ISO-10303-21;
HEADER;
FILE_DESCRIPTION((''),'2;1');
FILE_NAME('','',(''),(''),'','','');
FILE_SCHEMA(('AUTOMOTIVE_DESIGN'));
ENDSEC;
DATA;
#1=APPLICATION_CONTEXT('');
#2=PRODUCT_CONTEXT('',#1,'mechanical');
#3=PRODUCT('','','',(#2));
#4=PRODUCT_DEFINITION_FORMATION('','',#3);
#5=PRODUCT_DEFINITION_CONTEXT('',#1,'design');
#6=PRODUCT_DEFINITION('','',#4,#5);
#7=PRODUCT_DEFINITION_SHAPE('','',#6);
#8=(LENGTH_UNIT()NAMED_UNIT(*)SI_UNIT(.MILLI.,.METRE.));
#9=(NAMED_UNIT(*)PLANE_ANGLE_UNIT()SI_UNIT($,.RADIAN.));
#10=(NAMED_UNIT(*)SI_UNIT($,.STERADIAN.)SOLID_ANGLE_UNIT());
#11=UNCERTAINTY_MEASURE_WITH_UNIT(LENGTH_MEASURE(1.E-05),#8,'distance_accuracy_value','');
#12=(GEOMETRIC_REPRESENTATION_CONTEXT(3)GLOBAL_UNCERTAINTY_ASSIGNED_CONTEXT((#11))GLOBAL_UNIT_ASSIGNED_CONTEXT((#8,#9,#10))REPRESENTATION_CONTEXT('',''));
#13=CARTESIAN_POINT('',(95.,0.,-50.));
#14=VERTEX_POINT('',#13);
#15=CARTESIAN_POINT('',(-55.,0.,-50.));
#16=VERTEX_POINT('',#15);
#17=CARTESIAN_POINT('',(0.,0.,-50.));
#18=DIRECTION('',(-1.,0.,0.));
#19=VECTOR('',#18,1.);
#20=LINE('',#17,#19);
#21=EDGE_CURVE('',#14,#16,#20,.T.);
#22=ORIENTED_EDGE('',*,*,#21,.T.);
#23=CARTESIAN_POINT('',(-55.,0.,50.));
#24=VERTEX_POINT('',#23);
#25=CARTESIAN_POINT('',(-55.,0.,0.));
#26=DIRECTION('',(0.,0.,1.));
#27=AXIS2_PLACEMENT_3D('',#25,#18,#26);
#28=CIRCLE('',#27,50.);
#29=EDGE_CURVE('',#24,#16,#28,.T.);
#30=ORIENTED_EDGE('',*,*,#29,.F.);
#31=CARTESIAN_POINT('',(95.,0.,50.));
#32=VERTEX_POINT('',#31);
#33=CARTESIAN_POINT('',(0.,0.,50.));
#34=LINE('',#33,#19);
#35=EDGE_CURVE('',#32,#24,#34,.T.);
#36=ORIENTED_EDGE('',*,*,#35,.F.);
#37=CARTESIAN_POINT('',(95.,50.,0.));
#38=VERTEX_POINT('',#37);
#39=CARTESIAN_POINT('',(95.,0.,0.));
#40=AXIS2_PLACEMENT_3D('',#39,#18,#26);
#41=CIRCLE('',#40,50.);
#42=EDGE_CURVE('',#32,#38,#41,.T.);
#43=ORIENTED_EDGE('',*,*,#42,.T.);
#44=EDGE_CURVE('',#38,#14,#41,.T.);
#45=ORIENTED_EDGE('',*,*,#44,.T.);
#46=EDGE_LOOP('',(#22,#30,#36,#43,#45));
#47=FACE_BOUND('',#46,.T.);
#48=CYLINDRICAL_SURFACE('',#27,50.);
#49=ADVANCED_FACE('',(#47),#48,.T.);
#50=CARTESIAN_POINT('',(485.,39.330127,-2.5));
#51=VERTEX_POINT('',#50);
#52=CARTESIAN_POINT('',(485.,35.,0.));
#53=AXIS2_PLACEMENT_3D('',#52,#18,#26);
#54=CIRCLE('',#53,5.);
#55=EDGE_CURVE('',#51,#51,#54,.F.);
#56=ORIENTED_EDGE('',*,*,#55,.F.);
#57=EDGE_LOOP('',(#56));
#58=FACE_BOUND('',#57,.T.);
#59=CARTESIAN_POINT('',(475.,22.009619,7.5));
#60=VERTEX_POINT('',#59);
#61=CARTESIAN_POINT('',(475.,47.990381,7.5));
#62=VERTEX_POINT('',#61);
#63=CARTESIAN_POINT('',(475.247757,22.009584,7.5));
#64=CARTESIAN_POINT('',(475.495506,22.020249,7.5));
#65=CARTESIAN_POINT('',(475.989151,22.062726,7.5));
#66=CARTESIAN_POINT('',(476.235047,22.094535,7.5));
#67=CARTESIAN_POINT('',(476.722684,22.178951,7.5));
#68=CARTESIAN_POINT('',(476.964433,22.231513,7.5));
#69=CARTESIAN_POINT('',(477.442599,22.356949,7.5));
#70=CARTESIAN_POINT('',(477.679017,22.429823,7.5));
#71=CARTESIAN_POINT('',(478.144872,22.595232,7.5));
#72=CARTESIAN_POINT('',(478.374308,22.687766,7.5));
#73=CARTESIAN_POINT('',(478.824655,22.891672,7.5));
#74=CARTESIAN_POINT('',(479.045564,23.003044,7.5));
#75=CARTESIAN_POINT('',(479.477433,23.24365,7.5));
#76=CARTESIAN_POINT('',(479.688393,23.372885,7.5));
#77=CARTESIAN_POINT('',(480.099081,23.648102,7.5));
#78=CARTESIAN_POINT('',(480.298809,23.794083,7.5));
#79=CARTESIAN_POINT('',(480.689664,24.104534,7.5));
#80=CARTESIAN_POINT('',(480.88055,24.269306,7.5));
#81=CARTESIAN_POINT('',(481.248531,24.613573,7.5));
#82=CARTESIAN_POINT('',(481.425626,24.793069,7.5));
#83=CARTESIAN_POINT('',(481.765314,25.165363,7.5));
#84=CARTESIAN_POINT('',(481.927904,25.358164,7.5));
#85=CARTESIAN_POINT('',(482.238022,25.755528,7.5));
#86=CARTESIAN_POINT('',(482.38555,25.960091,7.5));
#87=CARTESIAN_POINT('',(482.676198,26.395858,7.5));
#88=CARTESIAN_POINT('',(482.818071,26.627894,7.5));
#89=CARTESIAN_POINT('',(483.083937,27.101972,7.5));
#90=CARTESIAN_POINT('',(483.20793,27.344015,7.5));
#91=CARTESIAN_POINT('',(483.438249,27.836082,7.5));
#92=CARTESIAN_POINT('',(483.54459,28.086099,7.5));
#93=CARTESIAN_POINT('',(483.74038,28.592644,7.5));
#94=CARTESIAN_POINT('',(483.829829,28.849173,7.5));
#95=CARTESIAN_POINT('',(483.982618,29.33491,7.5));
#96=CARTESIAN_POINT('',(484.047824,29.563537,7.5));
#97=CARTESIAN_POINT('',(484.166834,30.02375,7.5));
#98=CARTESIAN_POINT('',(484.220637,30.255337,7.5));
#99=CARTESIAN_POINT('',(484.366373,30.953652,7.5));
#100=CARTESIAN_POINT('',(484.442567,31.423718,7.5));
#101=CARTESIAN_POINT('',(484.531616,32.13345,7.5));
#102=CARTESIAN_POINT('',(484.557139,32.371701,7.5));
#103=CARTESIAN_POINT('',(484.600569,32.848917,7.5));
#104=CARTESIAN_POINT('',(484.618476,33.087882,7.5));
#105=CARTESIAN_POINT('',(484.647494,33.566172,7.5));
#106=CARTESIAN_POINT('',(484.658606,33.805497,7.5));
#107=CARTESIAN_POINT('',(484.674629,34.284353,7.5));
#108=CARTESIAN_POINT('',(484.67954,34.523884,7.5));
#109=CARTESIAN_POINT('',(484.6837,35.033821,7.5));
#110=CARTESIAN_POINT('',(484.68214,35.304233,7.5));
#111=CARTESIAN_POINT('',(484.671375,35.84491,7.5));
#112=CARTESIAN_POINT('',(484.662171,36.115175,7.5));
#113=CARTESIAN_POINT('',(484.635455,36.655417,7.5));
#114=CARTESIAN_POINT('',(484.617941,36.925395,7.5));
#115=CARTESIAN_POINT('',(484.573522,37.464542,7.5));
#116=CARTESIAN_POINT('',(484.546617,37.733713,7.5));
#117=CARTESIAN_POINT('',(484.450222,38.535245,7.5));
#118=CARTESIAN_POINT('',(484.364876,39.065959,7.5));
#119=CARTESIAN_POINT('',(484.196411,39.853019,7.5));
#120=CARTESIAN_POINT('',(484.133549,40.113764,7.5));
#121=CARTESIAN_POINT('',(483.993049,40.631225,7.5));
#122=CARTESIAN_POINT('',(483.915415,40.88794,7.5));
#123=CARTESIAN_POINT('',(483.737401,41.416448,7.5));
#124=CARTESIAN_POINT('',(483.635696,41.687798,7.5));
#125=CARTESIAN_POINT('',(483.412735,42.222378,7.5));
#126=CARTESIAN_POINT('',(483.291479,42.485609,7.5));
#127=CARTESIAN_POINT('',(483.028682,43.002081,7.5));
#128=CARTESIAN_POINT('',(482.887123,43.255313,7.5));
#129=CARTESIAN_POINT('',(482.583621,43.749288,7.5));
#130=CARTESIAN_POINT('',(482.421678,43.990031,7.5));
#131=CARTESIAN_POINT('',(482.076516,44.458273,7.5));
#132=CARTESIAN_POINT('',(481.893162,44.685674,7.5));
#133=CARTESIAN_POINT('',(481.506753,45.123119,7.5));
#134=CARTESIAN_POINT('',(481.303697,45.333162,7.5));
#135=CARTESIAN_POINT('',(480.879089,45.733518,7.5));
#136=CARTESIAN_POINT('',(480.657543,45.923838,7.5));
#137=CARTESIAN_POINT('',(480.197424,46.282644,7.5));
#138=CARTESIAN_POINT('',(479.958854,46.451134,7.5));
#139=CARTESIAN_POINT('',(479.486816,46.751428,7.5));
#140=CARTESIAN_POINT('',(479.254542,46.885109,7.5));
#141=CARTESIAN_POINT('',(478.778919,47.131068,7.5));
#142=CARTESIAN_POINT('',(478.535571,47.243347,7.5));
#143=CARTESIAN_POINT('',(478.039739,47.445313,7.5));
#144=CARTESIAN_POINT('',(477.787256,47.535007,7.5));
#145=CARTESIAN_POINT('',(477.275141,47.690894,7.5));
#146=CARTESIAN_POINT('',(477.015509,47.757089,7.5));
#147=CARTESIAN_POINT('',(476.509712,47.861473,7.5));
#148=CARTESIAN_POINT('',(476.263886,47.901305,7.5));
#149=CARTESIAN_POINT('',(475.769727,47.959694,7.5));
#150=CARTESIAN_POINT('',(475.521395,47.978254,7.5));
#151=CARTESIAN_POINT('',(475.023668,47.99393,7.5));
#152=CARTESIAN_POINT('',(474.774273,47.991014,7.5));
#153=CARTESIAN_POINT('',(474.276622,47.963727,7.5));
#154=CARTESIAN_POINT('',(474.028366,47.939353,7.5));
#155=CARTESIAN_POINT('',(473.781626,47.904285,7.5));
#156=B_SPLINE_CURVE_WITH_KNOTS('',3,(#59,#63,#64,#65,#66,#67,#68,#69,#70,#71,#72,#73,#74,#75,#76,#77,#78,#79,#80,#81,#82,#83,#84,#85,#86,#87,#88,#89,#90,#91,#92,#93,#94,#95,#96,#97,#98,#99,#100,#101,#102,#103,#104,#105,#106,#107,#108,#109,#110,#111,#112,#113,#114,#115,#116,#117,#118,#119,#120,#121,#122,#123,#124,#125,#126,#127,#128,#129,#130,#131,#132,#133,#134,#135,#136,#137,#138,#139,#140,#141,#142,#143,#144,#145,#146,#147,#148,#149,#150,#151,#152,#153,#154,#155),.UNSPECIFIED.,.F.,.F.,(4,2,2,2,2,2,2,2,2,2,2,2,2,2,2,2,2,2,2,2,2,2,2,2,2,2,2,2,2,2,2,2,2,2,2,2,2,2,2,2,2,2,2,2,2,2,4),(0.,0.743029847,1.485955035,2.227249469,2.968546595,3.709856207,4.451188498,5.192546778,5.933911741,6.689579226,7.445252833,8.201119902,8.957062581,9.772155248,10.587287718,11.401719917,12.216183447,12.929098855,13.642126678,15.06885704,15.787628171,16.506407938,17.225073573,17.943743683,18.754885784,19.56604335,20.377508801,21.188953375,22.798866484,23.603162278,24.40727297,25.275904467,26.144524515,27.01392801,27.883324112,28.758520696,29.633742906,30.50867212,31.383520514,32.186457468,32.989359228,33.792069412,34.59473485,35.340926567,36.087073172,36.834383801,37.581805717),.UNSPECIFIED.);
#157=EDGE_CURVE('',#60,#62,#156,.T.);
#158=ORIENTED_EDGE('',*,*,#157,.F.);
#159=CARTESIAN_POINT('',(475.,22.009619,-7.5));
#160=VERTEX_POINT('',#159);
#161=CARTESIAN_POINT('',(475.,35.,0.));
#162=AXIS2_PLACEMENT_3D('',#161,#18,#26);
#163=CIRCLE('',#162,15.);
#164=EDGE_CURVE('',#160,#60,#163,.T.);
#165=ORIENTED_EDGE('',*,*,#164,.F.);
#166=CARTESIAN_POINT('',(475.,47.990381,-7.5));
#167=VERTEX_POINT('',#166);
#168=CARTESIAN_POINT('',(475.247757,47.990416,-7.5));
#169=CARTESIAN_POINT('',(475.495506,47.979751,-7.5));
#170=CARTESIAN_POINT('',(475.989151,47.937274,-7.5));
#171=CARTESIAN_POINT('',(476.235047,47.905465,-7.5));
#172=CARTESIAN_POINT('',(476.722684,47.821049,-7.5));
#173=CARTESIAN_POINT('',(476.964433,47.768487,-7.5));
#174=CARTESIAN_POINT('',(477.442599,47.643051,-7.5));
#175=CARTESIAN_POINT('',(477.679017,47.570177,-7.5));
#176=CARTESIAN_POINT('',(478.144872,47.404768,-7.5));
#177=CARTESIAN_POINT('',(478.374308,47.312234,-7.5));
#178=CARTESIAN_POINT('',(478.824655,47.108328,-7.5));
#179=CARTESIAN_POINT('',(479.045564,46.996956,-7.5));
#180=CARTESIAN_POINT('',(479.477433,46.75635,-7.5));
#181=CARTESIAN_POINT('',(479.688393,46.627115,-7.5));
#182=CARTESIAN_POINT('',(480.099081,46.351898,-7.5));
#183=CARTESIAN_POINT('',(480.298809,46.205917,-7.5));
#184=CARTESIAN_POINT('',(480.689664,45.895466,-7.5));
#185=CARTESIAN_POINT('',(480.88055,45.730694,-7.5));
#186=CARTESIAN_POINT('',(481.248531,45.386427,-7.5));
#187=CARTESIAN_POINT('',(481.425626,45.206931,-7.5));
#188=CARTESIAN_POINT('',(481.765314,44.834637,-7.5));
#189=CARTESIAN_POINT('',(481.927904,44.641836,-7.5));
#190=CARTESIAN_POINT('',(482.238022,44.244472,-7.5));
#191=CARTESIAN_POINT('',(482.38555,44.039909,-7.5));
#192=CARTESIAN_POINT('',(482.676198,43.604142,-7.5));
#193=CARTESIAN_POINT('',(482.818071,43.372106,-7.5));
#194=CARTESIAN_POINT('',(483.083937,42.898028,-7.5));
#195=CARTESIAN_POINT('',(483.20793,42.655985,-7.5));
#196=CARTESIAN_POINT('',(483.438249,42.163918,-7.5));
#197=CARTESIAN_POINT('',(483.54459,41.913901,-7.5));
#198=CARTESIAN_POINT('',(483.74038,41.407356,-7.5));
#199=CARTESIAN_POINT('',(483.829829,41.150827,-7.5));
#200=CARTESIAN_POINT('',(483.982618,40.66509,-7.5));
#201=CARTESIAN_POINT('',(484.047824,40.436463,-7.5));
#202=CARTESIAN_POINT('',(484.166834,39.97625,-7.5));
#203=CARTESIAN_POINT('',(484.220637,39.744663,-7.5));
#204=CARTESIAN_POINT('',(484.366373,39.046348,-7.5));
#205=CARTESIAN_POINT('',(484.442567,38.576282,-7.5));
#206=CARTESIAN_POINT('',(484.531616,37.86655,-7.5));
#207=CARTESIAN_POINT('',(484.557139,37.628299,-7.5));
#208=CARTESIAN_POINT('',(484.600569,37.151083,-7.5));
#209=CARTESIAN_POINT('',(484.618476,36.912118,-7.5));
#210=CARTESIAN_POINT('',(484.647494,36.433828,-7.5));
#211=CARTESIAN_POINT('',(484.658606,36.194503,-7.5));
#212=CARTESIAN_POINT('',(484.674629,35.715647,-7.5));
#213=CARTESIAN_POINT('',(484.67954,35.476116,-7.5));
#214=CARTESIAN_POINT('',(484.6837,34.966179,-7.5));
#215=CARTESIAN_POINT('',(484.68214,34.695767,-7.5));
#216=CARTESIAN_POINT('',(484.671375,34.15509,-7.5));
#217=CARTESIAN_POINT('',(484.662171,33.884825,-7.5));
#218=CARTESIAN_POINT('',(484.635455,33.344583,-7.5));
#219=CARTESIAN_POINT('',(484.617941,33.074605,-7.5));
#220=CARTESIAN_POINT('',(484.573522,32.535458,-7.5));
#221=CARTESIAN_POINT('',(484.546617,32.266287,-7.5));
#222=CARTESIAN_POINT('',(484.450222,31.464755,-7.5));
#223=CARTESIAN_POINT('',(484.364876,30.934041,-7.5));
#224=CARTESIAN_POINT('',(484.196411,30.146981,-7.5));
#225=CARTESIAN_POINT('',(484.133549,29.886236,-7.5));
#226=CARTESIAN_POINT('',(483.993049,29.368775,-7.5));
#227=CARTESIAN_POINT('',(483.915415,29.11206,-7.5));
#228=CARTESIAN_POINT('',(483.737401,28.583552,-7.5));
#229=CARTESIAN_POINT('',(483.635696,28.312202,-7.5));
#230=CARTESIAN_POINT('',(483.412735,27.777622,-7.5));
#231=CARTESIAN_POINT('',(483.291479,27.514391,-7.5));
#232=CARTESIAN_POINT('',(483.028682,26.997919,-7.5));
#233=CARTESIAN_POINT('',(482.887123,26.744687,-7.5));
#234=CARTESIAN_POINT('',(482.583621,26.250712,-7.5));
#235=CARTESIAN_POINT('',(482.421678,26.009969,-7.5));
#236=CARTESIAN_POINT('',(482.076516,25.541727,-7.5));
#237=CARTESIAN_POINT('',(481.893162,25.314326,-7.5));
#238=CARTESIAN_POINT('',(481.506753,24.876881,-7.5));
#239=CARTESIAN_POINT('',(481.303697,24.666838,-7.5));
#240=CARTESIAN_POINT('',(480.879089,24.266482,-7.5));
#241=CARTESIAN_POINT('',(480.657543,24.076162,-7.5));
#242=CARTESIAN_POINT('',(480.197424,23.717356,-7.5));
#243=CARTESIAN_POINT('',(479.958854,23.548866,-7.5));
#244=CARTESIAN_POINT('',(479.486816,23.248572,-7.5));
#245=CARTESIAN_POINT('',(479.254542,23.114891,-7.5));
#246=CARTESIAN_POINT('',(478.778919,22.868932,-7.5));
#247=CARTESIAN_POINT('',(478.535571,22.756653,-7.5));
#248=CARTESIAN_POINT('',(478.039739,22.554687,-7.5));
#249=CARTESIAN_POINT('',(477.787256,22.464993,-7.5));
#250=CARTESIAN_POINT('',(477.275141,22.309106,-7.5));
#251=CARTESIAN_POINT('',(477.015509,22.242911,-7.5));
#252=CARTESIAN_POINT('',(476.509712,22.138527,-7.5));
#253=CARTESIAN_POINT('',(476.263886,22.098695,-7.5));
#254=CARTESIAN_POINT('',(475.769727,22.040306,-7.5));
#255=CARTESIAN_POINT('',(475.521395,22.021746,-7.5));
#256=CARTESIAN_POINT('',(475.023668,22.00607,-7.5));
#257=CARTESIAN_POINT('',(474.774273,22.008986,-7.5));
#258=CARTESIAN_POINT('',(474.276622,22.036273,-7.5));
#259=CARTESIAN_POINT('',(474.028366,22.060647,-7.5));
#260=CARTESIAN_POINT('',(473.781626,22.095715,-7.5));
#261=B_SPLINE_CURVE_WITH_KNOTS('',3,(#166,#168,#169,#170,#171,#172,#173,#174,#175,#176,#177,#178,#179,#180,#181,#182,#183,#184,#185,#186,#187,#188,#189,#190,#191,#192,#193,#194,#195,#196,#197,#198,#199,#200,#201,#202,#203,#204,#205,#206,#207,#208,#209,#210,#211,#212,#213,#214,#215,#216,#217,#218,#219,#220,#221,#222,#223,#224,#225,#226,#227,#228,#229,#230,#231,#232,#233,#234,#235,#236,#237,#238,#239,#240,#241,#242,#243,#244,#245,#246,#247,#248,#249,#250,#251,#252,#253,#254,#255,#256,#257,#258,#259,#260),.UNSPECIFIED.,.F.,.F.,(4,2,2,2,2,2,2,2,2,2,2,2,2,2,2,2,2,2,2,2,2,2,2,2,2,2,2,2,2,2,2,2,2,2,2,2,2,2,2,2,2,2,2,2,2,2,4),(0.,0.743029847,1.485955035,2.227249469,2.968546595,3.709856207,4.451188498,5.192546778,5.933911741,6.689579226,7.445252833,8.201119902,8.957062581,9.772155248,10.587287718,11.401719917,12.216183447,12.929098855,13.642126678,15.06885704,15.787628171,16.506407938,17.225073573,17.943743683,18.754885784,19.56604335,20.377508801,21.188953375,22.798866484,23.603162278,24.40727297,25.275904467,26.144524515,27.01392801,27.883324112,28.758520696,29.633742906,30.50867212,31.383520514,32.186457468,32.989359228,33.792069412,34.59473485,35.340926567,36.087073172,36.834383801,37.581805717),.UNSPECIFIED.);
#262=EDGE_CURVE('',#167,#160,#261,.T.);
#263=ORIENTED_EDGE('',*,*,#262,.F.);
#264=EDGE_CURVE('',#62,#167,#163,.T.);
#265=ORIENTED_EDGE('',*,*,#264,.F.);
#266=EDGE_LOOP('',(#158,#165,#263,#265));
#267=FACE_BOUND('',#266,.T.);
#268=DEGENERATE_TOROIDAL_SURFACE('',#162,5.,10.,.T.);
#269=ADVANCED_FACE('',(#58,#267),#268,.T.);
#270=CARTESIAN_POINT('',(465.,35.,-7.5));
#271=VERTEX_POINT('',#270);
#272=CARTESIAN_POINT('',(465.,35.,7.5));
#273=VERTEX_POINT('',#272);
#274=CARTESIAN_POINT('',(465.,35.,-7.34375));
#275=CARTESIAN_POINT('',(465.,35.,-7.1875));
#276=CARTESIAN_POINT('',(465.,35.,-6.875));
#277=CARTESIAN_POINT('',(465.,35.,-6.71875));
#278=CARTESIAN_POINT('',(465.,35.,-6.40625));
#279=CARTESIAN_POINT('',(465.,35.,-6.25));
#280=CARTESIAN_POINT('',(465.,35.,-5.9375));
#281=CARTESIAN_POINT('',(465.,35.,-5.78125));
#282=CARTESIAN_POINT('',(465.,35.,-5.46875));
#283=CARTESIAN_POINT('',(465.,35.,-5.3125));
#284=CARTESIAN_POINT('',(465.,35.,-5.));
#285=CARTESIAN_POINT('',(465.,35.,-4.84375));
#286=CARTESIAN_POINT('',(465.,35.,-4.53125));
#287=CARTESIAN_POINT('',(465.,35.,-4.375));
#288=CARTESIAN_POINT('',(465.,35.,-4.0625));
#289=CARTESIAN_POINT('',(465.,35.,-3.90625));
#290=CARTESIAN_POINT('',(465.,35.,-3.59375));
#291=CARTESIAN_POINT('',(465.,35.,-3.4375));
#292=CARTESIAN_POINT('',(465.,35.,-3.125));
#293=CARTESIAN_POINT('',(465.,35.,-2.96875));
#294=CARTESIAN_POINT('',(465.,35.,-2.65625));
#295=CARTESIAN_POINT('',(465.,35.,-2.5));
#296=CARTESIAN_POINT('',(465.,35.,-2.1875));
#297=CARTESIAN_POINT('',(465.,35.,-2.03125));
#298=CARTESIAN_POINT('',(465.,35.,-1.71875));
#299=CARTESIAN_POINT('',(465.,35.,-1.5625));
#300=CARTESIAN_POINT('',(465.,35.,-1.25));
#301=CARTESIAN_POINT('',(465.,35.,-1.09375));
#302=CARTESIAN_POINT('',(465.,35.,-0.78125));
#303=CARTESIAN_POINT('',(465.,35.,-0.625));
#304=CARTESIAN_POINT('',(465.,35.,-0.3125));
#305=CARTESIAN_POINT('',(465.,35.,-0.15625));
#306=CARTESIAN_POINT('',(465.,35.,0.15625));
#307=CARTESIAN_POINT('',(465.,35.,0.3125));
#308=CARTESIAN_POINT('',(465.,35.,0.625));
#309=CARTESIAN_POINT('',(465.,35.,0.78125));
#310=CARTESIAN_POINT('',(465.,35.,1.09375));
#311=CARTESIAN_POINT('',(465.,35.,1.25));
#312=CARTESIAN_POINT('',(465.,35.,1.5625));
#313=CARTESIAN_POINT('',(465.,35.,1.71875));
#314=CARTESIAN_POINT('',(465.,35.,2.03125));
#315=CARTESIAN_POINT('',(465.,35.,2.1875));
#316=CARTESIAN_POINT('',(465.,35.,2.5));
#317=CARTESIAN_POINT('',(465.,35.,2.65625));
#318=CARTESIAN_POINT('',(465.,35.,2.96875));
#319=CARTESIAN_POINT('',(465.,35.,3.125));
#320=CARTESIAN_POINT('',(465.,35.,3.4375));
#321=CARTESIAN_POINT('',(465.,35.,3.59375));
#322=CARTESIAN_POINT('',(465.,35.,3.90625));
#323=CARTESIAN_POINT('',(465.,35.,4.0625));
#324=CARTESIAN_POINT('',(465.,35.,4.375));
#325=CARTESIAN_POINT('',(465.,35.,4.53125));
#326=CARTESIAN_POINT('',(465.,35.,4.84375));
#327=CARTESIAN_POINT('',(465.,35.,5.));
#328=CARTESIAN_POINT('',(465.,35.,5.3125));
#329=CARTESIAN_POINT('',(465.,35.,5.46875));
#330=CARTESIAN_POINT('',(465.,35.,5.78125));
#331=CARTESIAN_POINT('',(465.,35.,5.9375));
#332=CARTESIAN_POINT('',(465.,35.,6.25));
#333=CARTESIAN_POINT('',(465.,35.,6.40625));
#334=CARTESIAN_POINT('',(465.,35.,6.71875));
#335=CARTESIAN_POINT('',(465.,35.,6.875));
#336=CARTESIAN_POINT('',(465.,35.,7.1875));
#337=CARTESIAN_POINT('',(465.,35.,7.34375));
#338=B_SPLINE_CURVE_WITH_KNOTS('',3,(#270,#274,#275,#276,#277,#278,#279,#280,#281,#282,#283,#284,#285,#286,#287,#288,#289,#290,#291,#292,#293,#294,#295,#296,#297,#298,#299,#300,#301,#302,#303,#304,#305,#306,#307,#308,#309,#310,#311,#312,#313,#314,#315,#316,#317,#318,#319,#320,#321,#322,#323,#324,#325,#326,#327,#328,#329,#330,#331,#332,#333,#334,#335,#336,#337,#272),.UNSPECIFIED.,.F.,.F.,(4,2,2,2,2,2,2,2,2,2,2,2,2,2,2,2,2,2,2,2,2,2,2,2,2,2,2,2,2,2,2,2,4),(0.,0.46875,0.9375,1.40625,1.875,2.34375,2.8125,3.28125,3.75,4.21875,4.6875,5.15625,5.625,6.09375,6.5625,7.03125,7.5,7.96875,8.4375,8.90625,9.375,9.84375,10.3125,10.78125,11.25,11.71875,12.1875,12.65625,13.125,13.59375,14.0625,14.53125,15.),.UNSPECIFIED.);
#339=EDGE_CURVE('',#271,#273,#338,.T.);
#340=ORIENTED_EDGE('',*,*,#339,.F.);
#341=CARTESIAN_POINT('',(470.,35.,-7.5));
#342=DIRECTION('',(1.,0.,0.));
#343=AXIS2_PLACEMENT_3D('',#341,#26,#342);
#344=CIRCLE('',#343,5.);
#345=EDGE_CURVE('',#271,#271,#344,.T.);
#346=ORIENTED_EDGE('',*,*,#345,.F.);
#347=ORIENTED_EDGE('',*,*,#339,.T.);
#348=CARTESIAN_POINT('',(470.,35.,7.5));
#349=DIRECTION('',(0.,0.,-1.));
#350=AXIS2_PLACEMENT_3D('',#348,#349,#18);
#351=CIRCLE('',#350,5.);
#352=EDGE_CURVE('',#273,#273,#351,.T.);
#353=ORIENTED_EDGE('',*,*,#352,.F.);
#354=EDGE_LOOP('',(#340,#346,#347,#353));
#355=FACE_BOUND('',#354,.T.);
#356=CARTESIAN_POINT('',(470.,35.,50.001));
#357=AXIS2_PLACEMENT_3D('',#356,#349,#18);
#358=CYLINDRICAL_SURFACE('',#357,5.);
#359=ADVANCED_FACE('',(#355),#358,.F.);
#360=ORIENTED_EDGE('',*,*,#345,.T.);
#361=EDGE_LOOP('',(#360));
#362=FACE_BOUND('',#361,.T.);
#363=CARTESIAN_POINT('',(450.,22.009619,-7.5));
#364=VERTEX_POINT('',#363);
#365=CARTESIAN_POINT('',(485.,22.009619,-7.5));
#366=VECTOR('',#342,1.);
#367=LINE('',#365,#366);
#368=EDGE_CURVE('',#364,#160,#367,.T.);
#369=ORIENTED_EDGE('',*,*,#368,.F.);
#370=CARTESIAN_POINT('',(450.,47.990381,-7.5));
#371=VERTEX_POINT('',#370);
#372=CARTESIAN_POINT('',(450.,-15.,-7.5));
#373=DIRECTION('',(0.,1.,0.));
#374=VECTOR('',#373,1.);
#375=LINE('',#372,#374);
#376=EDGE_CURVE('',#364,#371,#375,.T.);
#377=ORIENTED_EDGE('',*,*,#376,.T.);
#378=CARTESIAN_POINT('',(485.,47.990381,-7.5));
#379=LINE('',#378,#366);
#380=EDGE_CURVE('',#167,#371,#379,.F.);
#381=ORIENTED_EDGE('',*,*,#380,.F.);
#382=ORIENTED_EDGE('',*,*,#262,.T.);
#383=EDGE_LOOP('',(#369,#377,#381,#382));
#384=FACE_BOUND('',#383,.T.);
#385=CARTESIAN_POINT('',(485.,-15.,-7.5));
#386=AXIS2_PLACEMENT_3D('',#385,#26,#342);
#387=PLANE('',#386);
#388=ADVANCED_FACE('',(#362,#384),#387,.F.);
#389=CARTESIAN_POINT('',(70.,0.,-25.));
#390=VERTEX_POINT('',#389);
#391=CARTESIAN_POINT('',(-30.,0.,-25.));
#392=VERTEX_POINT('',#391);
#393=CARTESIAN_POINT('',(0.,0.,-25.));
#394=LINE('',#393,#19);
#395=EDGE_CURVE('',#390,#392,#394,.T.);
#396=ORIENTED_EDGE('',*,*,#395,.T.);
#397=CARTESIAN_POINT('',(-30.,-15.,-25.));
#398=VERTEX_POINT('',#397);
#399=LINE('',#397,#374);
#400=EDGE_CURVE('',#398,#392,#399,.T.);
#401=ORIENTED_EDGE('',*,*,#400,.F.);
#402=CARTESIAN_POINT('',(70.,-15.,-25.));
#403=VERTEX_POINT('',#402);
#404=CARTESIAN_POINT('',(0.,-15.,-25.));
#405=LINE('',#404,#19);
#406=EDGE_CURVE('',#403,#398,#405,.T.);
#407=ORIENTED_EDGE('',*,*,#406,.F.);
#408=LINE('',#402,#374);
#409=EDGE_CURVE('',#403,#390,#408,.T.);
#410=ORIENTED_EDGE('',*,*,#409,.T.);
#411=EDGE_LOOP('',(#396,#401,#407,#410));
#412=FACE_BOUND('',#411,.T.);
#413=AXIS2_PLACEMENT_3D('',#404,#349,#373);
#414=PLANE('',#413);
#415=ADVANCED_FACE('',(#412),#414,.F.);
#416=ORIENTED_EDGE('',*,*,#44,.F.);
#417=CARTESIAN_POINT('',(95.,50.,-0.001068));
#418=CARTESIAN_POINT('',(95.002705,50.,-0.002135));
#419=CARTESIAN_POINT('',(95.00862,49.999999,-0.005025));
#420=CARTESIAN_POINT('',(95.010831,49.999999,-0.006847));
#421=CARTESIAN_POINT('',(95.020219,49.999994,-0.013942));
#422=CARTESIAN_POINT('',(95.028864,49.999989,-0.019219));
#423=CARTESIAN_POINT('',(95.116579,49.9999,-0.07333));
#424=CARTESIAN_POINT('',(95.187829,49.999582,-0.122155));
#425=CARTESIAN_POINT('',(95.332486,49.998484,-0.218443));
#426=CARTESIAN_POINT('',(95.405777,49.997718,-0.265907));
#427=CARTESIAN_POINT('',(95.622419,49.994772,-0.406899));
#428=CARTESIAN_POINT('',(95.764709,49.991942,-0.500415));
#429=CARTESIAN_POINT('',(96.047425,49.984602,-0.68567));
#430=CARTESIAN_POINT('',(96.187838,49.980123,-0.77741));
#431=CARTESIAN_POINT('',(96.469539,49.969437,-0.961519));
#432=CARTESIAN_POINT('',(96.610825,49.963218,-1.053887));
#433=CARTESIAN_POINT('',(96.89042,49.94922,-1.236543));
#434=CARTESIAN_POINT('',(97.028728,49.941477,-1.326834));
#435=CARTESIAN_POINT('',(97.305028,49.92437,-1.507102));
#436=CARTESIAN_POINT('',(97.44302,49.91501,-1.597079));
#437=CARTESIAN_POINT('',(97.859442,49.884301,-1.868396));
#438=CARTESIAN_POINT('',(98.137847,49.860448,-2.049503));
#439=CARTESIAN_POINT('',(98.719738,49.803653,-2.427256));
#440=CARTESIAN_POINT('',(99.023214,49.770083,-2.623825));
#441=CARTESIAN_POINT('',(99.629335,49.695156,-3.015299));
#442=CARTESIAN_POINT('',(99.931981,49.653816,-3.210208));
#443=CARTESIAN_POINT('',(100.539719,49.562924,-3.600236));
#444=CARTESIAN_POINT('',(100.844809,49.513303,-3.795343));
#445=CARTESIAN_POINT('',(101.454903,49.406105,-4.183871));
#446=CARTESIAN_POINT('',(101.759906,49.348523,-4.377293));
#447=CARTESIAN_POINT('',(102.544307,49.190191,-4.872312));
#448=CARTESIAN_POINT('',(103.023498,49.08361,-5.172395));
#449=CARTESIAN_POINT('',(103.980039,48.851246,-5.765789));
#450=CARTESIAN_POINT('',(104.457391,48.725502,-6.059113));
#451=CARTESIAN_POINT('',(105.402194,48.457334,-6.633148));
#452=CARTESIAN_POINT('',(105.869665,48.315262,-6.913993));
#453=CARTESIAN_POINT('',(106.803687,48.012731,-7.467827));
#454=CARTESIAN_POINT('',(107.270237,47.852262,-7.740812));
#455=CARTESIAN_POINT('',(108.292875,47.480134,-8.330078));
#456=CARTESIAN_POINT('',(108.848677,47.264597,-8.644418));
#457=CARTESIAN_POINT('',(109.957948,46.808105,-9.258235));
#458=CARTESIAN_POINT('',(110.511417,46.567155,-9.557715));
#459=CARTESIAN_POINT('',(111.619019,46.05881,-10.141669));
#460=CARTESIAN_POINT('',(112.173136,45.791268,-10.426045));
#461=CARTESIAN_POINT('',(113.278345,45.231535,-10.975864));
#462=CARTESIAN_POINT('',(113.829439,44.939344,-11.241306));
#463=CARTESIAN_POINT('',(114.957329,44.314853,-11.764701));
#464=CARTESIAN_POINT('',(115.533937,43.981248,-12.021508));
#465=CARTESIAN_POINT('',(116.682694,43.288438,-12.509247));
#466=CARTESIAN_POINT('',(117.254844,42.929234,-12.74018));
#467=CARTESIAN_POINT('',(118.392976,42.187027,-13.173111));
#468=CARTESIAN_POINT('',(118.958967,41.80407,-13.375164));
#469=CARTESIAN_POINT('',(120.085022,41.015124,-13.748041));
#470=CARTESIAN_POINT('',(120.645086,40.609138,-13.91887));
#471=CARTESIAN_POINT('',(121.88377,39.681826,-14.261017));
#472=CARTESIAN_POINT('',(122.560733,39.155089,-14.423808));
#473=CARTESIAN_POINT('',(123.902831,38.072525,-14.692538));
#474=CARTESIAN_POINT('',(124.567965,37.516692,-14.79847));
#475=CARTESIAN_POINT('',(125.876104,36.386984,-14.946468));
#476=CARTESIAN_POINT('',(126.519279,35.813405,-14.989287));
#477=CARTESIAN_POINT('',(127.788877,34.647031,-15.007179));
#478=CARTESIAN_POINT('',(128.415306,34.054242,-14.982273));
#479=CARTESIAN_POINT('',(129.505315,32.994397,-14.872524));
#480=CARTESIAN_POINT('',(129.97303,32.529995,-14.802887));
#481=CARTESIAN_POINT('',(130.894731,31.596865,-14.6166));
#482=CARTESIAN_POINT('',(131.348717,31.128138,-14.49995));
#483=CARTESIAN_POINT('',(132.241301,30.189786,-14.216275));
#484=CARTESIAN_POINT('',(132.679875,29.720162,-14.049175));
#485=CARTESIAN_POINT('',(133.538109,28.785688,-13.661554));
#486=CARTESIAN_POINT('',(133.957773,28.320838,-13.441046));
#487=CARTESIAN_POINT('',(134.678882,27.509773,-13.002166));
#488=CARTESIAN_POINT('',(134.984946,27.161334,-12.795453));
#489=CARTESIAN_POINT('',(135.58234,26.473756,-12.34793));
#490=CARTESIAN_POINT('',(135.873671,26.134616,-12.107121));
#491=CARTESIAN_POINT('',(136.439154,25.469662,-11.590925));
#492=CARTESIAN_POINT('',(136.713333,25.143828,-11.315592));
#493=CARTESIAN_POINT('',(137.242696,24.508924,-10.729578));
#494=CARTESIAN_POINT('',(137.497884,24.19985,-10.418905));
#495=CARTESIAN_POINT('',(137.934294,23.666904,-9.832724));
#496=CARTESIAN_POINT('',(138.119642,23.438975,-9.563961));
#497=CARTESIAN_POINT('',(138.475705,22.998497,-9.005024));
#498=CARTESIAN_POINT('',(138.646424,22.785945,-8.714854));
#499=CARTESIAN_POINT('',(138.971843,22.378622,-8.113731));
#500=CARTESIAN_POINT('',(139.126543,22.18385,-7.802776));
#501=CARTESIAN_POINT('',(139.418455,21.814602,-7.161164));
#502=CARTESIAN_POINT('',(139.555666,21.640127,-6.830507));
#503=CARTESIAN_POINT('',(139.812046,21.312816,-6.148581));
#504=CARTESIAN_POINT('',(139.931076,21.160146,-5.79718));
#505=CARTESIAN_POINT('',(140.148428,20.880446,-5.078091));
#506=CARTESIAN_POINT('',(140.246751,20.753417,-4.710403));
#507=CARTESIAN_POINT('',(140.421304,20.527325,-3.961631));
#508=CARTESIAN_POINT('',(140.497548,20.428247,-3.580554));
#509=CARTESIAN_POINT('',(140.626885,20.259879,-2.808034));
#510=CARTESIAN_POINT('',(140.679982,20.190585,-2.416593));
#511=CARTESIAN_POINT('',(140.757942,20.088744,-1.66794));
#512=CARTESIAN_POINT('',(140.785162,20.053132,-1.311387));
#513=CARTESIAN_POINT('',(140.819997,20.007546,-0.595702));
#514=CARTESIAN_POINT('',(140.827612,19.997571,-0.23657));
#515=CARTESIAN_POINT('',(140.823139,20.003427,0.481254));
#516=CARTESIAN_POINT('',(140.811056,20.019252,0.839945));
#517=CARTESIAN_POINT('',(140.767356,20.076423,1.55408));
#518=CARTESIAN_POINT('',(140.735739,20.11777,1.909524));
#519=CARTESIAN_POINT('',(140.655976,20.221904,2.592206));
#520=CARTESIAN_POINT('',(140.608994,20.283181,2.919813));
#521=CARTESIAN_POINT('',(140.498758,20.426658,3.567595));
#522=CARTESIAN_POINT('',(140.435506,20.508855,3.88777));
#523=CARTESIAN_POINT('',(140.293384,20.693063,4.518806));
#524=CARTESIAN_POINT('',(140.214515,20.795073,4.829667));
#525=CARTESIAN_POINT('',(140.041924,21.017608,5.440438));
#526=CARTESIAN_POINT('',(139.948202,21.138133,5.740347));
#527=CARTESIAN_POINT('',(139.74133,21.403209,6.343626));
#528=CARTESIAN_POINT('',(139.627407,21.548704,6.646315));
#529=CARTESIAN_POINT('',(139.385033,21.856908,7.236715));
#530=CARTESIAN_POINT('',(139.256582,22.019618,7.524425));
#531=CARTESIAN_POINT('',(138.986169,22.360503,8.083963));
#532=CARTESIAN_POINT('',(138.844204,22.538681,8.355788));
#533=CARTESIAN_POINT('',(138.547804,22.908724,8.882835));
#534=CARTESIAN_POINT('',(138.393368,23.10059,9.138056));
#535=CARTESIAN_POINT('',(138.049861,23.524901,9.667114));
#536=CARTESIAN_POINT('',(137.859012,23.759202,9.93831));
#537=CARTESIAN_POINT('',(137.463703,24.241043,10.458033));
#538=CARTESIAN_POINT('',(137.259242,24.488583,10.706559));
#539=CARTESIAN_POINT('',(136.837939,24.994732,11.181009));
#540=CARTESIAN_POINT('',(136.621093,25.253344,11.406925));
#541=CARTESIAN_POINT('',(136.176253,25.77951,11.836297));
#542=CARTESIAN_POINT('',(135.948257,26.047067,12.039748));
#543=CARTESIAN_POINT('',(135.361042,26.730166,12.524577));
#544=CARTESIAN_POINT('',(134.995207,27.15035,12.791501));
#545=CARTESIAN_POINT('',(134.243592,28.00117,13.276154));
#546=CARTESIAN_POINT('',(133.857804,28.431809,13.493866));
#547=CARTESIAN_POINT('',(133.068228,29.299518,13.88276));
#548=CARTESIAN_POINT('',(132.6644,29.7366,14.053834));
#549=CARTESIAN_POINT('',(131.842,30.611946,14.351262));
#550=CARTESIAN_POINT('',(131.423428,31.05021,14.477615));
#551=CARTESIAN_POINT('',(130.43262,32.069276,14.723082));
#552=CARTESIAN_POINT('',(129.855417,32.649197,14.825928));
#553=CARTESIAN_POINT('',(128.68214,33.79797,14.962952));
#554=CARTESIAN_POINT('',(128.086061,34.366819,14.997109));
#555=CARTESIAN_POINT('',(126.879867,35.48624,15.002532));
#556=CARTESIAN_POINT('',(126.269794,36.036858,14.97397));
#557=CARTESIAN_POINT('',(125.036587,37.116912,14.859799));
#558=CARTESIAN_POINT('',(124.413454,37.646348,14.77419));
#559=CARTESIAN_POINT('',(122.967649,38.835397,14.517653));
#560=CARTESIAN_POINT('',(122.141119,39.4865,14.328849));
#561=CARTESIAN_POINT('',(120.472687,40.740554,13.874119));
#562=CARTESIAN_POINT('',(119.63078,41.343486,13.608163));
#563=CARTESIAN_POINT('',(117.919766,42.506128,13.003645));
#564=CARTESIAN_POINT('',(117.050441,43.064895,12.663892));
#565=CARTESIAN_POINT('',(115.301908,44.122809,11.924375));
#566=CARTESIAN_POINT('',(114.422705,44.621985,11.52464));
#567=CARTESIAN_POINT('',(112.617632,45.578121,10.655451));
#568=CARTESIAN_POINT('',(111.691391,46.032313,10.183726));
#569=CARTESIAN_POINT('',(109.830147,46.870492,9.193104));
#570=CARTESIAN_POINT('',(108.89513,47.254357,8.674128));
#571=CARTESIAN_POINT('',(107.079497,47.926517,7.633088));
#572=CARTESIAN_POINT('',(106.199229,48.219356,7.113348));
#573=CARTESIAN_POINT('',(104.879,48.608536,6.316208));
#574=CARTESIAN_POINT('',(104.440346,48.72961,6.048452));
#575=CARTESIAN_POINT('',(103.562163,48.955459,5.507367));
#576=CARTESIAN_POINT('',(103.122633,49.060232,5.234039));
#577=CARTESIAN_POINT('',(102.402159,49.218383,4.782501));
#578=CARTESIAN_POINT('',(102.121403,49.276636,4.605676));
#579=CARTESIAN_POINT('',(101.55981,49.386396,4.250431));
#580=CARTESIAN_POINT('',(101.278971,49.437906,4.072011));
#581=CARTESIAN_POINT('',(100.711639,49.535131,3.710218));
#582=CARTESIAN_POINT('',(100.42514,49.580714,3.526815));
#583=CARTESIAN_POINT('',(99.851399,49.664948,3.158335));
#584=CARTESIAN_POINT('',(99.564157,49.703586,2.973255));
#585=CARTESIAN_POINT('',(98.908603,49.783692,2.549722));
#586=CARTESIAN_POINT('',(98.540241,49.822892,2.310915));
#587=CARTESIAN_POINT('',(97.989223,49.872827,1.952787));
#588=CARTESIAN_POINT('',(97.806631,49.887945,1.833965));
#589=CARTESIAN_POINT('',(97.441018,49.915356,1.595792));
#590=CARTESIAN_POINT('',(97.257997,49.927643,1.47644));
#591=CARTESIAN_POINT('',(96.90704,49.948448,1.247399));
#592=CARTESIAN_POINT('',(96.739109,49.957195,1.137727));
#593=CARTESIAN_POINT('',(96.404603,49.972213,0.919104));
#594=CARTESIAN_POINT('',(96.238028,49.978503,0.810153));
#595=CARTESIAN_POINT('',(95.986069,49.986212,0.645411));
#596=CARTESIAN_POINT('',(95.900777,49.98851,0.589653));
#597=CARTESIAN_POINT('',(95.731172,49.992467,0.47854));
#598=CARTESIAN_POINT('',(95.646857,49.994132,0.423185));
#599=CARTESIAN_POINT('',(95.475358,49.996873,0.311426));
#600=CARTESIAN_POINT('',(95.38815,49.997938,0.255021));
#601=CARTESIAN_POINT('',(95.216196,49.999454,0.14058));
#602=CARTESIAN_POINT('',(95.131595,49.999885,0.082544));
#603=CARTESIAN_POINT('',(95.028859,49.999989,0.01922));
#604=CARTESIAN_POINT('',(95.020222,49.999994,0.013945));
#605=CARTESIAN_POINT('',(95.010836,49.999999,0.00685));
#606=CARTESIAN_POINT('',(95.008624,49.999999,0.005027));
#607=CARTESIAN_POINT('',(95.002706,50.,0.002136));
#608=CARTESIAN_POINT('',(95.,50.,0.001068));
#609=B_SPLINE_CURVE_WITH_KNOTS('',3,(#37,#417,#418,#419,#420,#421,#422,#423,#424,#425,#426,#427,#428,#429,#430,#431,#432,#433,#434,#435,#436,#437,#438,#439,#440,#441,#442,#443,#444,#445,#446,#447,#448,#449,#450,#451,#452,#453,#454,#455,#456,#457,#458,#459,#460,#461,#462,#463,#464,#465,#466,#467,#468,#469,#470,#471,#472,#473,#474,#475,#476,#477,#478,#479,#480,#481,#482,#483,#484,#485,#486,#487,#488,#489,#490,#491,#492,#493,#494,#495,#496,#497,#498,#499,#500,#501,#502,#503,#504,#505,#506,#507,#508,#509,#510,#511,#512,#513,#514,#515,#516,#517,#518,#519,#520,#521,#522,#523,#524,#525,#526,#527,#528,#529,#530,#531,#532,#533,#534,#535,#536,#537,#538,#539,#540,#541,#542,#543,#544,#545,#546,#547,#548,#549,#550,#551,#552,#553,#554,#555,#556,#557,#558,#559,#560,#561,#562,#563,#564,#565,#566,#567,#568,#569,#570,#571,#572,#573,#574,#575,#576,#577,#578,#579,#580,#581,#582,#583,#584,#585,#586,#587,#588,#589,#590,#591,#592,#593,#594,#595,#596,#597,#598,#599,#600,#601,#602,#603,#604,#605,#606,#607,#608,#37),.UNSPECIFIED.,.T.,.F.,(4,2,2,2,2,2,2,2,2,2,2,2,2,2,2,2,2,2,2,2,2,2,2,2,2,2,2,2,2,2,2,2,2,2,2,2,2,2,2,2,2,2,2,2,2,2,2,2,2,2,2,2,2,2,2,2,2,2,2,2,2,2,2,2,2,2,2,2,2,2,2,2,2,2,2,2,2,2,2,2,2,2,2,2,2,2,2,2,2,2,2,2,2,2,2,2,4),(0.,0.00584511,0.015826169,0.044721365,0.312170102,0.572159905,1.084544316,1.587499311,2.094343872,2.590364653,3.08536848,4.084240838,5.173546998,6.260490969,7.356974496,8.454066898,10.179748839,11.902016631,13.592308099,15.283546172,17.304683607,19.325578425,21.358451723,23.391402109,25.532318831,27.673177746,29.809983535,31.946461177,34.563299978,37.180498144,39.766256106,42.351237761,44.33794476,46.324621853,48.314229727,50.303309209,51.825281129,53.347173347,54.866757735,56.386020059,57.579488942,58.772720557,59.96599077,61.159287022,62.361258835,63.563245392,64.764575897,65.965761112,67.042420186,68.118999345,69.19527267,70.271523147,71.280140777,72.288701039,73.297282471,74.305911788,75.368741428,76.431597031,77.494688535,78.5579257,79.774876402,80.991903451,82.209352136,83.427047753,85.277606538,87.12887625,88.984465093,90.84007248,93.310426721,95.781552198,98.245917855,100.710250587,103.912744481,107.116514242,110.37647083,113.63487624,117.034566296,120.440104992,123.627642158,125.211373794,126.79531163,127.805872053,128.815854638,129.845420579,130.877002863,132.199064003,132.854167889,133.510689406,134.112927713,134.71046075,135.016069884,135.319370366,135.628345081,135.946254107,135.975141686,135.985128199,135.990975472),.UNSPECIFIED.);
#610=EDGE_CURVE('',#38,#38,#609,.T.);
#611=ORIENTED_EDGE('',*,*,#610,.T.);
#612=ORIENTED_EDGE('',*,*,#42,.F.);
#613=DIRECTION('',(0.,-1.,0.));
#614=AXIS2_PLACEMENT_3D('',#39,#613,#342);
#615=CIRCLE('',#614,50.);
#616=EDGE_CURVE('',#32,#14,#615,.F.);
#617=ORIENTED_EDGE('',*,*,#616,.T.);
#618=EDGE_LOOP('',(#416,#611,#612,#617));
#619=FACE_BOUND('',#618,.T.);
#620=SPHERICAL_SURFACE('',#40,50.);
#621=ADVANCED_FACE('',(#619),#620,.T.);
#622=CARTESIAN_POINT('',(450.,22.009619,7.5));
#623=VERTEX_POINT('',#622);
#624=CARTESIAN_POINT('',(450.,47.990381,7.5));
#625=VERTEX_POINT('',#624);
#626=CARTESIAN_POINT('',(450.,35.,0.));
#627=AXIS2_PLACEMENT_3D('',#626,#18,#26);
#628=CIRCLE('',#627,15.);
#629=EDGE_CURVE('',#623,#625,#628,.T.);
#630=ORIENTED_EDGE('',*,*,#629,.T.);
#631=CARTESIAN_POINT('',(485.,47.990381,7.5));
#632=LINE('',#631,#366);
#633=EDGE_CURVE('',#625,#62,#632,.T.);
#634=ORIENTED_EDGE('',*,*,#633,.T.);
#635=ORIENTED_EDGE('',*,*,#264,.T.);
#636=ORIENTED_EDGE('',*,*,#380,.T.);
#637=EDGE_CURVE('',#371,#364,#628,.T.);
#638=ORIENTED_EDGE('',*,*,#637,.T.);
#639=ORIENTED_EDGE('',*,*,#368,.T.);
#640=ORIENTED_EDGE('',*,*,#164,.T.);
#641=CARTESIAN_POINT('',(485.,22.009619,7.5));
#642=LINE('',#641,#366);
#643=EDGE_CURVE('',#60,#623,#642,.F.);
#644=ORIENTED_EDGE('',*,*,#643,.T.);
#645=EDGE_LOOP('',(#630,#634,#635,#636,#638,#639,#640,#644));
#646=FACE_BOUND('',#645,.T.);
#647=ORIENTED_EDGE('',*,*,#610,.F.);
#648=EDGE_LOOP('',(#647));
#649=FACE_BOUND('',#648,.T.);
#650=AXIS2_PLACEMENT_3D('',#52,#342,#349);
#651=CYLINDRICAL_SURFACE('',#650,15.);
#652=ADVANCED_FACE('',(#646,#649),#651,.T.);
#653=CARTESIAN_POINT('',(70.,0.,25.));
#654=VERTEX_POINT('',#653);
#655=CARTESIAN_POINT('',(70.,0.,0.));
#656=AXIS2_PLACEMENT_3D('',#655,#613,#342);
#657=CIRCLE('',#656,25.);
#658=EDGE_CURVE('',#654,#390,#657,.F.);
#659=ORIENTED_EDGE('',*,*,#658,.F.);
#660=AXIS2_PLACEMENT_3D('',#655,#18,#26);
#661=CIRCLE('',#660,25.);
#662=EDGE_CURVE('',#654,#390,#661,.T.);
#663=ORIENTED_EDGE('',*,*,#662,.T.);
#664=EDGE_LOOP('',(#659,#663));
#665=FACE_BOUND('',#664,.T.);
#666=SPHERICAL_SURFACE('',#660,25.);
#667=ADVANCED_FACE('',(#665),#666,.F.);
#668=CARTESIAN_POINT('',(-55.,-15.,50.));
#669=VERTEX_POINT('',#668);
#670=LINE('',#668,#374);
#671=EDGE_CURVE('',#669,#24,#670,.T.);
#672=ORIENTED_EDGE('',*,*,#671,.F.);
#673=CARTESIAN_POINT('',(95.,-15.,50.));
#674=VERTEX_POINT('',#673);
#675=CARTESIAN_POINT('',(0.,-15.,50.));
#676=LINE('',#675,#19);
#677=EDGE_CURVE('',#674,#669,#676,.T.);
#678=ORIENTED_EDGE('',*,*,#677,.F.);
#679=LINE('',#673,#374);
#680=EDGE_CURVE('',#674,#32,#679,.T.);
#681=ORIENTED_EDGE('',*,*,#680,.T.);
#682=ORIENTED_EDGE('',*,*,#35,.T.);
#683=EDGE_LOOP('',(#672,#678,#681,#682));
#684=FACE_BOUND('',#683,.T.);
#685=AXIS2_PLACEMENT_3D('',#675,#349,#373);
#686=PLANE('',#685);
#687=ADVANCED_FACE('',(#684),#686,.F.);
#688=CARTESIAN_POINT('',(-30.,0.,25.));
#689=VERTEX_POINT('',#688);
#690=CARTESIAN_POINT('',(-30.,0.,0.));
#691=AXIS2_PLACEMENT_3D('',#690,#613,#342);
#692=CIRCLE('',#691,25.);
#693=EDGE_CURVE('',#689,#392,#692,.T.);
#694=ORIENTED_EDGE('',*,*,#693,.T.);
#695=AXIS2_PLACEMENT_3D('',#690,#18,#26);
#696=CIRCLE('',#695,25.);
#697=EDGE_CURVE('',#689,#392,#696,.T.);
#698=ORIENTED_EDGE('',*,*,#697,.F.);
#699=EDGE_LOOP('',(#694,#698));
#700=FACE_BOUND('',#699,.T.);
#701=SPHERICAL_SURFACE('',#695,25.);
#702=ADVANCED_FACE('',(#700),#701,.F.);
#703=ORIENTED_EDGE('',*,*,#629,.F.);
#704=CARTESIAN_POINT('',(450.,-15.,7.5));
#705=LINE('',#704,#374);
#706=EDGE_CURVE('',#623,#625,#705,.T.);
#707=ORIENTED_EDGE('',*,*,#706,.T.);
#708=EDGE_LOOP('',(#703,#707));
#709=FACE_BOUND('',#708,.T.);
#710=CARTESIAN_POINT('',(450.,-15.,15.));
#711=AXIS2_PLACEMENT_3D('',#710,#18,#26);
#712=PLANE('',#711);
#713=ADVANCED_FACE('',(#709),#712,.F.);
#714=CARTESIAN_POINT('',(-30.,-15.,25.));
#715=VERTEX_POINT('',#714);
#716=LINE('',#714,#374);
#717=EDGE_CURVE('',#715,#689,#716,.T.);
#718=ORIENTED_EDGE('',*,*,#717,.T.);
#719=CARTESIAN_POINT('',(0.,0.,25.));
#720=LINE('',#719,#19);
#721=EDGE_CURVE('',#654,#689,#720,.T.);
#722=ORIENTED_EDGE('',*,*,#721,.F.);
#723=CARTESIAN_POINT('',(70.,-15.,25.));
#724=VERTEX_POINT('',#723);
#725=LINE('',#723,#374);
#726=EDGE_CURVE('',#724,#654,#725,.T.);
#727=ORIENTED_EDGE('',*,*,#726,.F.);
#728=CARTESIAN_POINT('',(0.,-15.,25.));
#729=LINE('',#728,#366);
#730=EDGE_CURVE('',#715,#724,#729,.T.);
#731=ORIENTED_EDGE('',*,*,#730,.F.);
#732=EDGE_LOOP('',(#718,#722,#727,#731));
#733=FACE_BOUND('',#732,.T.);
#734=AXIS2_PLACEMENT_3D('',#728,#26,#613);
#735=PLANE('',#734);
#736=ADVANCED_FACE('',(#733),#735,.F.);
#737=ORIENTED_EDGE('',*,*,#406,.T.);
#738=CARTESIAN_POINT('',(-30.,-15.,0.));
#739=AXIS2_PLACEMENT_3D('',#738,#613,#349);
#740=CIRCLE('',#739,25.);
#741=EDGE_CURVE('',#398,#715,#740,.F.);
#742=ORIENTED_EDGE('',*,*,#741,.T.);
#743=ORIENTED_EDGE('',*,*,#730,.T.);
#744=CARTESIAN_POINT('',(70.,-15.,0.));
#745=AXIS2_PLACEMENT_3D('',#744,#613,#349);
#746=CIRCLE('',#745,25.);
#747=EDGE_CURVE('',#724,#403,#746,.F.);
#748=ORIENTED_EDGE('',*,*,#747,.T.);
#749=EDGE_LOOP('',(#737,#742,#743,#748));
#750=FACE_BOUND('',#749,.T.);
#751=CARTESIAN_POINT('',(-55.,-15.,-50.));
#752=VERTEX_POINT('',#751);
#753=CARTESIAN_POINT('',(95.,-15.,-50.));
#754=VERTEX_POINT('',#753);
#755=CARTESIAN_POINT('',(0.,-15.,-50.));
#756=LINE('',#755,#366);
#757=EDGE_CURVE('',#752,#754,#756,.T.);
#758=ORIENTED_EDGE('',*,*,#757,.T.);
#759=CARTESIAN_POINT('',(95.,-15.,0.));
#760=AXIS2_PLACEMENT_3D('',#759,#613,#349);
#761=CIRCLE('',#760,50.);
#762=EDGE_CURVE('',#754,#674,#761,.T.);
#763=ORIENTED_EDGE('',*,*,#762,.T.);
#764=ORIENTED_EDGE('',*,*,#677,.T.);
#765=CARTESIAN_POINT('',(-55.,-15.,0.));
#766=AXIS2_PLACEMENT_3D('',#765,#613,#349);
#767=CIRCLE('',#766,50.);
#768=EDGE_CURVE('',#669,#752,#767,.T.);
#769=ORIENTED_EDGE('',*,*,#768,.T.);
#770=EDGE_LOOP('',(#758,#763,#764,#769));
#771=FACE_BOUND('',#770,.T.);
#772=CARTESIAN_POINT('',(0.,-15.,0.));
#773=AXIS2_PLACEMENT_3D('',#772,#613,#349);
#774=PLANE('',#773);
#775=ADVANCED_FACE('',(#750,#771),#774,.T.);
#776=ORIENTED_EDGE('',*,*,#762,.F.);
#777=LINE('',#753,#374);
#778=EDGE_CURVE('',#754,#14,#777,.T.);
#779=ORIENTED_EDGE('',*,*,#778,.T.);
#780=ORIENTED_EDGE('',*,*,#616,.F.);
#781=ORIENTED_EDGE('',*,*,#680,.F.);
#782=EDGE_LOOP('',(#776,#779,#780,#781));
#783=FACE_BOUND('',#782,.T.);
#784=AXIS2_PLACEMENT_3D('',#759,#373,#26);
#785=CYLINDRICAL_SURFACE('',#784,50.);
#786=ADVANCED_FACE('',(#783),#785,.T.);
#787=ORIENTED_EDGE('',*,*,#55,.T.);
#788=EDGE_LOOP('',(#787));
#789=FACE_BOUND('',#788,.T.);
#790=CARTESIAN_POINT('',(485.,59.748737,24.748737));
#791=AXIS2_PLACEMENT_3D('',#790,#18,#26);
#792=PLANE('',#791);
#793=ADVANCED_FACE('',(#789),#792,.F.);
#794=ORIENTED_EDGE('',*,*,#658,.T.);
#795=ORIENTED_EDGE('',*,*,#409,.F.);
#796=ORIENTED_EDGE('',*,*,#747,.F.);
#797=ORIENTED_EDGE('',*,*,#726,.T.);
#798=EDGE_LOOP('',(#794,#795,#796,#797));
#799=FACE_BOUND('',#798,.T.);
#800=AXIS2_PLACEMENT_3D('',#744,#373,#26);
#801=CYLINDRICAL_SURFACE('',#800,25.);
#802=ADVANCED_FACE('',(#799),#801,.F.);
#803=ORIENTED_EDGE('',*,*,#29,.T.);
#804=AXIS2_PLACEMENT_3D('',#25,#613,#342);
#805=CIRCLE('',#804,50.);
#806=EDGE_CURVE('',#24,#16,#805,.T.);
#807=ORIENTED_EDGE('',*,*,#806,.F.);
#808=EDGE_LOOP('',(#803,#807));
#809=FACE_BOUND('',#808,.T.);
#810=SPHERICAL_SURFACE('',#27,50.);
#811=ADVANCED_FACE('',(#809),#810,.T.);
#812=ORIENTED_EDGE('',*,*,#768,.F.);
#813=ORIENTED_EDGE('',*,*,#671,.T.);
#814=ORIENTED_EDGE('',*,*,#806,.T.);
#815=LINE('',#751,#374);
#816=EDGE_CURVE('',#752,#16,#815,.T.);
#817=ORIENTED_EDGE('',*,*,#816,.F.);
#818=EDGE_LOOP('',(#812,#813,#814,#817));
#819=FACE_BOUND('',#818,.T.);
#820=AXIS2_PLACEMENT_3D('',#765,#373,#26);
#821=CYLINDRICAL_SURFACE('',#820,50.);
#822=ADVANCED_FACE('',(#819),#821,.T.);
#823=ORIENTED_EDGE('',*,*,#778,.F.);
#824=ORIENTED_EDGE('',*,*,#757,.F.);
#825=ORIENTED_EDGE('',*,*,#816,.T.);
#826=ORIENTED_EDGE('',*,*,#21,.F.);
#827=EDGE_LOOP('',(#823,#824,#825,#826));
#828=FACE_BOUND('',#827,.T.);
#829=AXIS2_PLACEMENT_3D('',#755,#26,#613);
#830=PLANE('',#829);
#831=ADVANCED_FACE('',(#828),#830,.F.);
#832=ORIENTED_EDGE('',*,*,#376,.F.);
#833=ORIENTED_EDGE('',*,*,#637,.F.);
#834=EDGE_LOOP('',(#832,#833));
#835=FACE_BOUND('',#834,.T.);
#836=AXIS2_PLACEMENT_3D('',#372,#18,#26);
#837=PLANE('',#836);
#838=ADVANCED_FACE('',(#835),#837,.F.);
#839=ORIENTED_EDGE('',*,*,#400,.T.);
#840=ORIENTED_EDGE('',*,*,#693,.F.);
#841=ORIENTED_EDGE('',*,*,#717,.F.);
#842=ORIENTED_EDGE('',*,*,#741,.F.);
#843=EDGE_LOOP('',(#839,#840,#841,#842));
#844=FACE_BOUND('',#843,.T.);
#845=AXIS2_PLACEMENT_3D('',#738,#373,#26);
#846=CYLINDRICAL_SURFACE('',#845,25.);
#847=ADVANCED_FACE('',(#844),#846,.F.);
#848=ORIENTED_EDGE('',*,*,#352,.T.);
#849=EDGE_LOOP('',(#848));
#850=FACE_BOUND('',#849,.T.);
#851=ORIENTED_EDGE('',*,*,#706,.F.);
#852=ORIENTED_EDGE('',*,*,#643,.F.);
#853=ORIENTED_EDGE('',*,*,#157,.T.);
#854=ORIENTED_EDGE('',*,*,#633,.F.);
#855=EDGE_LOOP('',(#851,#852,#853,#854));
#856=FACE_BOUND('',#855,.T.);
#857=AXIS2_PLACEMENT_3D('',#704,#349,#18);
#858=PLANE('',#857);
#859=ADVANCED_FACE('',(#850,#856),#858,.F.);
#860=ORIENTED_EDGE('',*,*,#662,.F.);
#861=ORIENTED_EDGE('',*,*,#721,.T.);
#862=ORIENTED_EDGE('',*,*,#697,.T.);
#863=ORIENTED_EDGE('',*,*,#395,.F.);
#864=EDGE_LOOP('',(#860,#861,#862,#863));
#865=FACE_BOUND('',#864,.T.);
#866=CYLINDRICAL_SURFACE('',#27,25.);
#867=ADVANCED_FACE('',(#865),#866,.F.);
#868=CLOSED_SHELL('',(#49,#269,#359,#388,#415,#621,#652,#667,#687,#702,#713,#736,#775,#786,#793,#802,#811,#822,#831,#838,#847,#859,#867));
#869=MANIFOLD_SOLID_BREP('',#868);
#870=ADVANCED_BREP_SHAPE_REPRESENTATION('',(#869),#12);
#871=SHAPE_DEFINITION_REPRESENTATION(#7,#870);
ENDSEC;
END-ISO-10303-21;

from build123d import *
from build123d.topology import SkipClean

# Parameters (mm, degrees)
REVOLVE2_ANGLE                      = 180
SKETCH1_3_W                         = 354.292858
SKETCH1_3_H                         = 15
REVOLVE3_ANGLE                      = 270
SKETCH1_19_W                        = 354.292858
SKETCH1_19_H                        = 15
BOSS_EXTRUDE1_DEPTH                 = 15
CUT_EXTRUDE1_REACH                  = 492.128
CUT_EXTRUDE1_END_RADIUS             = 15
SKETCH5_R                           = 5
CUT_EXTRUDE1_DIRECTION_2_REACH      = 492.128
CUT_EXTRUDE1_DIRECTION_2_END_RADIUS = 15
CUT_EXTRUDE6_DEPTH                  = 491.127535
CUT_EXTRUDE6_DEPTH_BACK             = 491.127535
SKETCH6_W                           = 35
SKETCH6_H                           = 7.5
FILLET1_R                           = 10


with BuildPart() as part:
    # Sketch1 → Revolve2 (revolve, symmetric)
    with SkipClean():  # the faces are left unmerged after this step: merging them gives an invalid solid
        with BuildSketch(Plane.XY) as revolve2_sk:
            with BuildLine():
                ThreePointArc((145, 0), (141.289076, 18.902948), (130.707142, 35))
                ThreePointArc((130.707142, 35), (114.364917, 46.097722), (95, 50))
                Line((95, 50), (-55, 50))
                ThreePointArc((-55, 50), (-90.355339, 35.355339), (-105, 0))
                Line((-105, 0), (-55, 0))
                ThreePointArc((-55, 0), (-47.67767, 17.67767), (-30, 25))
                Line((-30, 25), (70, 25))
                ThreePointArc((70, 25), (87.67767, 17.67767), (95, 0))
                Line((95, 0), (145, 0))
            make_face()
        revolve(axis=Axis((-55, 0, 0), (1, 0, 0)), revolution_arc=REVOLVE2_ANGLE / 2)
        revolve(revolve2_sk.sketch, axis=Axis((-55, 0, 0), (-1, 0, 0)), revolution_arc=REVOLVE2_ANGLE / 2)

    # Sketch1<3> → Revolve3 (revolve, symmetric)
    with SkipClean():  # the faces are left unmerged after this step: merging them gives an invalid solid
        with BuildSketch(Plane.XY) as revolve3_sk:
            with Locations((307.853571, 42.5)):
                Rectangle(SKETCH1_3_W, SKETCH1_3_H)
            with BuildLine():
                Line((130.707142, 35), (130.707142, 50))
                Line((130.707142, 50), (95, 50))
                ThreePointArc((95, 50), (114.364917, 46.097722), (130.707142, 35))
            make_face()
        revolve(axis=Axis((485, 35, 0), (-1, 0, 0)), revolution_arc=REVOLVE3_ANGLE / 2)
        revolve(revolve3_sk.sketch, axis=Axis((485, 35, 0), (1, 0, 0)), revolution_arc=REVOLVE3_ANGLE / 2)

    # Sketch1<19> → Revolve4 (revolve)
    with SkipClean():  # the faces are left unmerged after this step: merging them gives an invalid solid
        with BuildSketch(Plane.XY, mode=Mode.PRIVATE) as revolve4_sk:
            with Locations((307.853571, 42.5)):
                Rectangle(SKETCH1_19_W, SKETCH1_19_H)
        revolve(revolve4_sk.sketch.rotate(Axis((485, 35, 0), (-1, 0, 0)), 90), axis=Axis((485, 35, 0), (-1, 0, 0)))

    # Sketch2 → Boss-Extrude1 (add)
    with SkipClean():  # the faces are left unmerged after this step: merging them gives an invalid solid
        with BuildSketch(Plane.XZ):
            with BuildLine():
                Line((-55, -50), (95, -50))
                ThreePointArc((95, -50), (145, 0), (95, 50))
                Line((95, 50), (-55, 50))
                ThreePointArc((-55, 50), (-105, 0), (-55, -50))
            make_face()
            with BuildLine():
                ThreePointArc((-30, -25), (-55, 0), (-30, 25))
                Line((-30, 25), (70, 25))
                ThreePointArc((70, 25), (95, 0), (70, -25))
                Line((70, -25), (-30, -25))
            make_face(mode=Mode.SUBTRACT)
        extrude(amount=BOSS_EXTRUDE1_DEPTH)

    # Cut-Extrude1: up to this cylinder (the profile starts inside it)
    with SkipClean():  # the faces are left unmerged after this step: merging them gives an invalid solid
        cut_extrude1_end = Plane(origin=(470, 35, 0), z_dir=(1, 0, 0)) * Cylinder(CUT_EXTRUDE1_END_RADIUS, 1015.256, mode=Mode.PRIVATE)
        # Sketch5 → Cut-Extrude1 (cut, up to the surface)
        with BuildSketch(Plane.XY, mode=Mode.PRIVATE) as cut_extrude1_sk1:
            with Locations(Location((470, 35, 0), (0, 0, 180))):
                Circle(SKETCH5_R)
        cut_extrude1_tool1 = extrude(cut_extrude1_sk1.sketch, amount=-CUT_EXTRUDE1_REACH, mode=Mode.PRIVATE) & cut_extrude1_end
        add(cut_extrude1_tool1.solids().sort_by_distance((470, 35, 0))[0], mode=Mode.SUBTRACT)

    # Cut-Extrude1 direction 2: up to this cylinder (the profile starts inside it)
    with SkipClean():  # the faces are left unmerged after this step: merging them gives an invalid solid
        cut_extrude1_direction_2_end = Plane(origin=(470, 35, 0), z_dir=(1, 0, 0)) * Cylinder(CUT_EXTRUDE1_DIRECTION_2_END_RADIUS, 1015.256, mode=Mode.PRIVATE)
        # Sketch5 → Cut-Extrude1 direction 2 (cut, up to the surface)
        with BuildSketch(Plane.XY, mode=Mode.PRIVATE) as cut_extrude1_direction_2_sk1:
            with Locations(Location((470, 35, 0), (0, 0, 180))):
                Circle(SKETCH5_R)
        cut_extrude1_direction_2_tool1 = extrude(cut_extrude1_direction_2_sk1.sketch, amount=CUT_EXTRUDE1_DIRECTION_2_REACH, mode=Mode.PRIVATE) & cut_extrude1_direction_2_end
        add(cut_extrude1_direction_2_tool1.solids().sort_by_distance((470, 35, 0))[0], mode=Mode.SUBTRACT)

    # Sketch6 → Cut-Extrude6 (cut, two sides: drawn at the far end of the back side and taken through both)
    with SkipClean():  # the faces are left unmerged after this step: merging them gives an invalid solid
        with BuildSketch(Plane(origin=(0, 0, 0), x_dir=(1, 0, 0), z_dir=(0, 1, 0)).offset(-CUT_EXTRUDE6_DEPTH_BACK)):
            with Locations((467.5, 11.25)):
                Rectangle(SKETCH6_W, SKETCH6_H)
            with Locations((467.5, -11.25)):
                Rectangle(SKETCH6_W, SKETCH6_H)
        extrude(amount=CUT_EXTRUDE6_DEPTH + CUT_EXTRUDE6_DEPTH_BACK, mode=Mode.SUBTRACT)

    # Fillet1
    # the kernel refuses this fillet: 10 mm, written as the material it takes off along each edge
    with BuildSketch(Plane(origin=(485, 35, 0), x_dir=(0, 0.5808452103821433, -0.8140140303312491), z_dir=(0, 0.8140140303312491, 0.5808452103821433))) as fillet1_piece_1:
        with BuildLine():
            CenterArc((15 - FILLET1_R, FILLET1_R), FILLET1_R, 270, 90)
            Line((15 - FILLET1_R, 0), (15, 0))
            Line((15, 0), (15, FILLET1_R))
        make_face()
    revolve(axis=Axis((485, 35, 0), (-1, 0, 0)), revolution_arc=251.020024, mode=Mode.SUBTRACT)
    with BuildSketch(Plane(origin=(485, 35, 0), x_dir=(0, -0.5808452103821072, -0.8140140303312748), z_dir=(0, -0.8140140303312748, 0.5808452103821072))) as fillet1_piece_2:
        with BuildLine():
            CenterArc((15 - FILLET1_R, -FILLET1_R), FILLET1_R, 0, 90)
            Line((15 - FILLET1_R, 0), (15, 0))
            Line((15, 0), (15, -FILLET1_R))
        make_face()
    revolve(axis=Axis((485, 35, 0), (1, 0, 0)), revolution_arc=251.020024, mode=Mode.SUBTRACT)


solid = part.part
